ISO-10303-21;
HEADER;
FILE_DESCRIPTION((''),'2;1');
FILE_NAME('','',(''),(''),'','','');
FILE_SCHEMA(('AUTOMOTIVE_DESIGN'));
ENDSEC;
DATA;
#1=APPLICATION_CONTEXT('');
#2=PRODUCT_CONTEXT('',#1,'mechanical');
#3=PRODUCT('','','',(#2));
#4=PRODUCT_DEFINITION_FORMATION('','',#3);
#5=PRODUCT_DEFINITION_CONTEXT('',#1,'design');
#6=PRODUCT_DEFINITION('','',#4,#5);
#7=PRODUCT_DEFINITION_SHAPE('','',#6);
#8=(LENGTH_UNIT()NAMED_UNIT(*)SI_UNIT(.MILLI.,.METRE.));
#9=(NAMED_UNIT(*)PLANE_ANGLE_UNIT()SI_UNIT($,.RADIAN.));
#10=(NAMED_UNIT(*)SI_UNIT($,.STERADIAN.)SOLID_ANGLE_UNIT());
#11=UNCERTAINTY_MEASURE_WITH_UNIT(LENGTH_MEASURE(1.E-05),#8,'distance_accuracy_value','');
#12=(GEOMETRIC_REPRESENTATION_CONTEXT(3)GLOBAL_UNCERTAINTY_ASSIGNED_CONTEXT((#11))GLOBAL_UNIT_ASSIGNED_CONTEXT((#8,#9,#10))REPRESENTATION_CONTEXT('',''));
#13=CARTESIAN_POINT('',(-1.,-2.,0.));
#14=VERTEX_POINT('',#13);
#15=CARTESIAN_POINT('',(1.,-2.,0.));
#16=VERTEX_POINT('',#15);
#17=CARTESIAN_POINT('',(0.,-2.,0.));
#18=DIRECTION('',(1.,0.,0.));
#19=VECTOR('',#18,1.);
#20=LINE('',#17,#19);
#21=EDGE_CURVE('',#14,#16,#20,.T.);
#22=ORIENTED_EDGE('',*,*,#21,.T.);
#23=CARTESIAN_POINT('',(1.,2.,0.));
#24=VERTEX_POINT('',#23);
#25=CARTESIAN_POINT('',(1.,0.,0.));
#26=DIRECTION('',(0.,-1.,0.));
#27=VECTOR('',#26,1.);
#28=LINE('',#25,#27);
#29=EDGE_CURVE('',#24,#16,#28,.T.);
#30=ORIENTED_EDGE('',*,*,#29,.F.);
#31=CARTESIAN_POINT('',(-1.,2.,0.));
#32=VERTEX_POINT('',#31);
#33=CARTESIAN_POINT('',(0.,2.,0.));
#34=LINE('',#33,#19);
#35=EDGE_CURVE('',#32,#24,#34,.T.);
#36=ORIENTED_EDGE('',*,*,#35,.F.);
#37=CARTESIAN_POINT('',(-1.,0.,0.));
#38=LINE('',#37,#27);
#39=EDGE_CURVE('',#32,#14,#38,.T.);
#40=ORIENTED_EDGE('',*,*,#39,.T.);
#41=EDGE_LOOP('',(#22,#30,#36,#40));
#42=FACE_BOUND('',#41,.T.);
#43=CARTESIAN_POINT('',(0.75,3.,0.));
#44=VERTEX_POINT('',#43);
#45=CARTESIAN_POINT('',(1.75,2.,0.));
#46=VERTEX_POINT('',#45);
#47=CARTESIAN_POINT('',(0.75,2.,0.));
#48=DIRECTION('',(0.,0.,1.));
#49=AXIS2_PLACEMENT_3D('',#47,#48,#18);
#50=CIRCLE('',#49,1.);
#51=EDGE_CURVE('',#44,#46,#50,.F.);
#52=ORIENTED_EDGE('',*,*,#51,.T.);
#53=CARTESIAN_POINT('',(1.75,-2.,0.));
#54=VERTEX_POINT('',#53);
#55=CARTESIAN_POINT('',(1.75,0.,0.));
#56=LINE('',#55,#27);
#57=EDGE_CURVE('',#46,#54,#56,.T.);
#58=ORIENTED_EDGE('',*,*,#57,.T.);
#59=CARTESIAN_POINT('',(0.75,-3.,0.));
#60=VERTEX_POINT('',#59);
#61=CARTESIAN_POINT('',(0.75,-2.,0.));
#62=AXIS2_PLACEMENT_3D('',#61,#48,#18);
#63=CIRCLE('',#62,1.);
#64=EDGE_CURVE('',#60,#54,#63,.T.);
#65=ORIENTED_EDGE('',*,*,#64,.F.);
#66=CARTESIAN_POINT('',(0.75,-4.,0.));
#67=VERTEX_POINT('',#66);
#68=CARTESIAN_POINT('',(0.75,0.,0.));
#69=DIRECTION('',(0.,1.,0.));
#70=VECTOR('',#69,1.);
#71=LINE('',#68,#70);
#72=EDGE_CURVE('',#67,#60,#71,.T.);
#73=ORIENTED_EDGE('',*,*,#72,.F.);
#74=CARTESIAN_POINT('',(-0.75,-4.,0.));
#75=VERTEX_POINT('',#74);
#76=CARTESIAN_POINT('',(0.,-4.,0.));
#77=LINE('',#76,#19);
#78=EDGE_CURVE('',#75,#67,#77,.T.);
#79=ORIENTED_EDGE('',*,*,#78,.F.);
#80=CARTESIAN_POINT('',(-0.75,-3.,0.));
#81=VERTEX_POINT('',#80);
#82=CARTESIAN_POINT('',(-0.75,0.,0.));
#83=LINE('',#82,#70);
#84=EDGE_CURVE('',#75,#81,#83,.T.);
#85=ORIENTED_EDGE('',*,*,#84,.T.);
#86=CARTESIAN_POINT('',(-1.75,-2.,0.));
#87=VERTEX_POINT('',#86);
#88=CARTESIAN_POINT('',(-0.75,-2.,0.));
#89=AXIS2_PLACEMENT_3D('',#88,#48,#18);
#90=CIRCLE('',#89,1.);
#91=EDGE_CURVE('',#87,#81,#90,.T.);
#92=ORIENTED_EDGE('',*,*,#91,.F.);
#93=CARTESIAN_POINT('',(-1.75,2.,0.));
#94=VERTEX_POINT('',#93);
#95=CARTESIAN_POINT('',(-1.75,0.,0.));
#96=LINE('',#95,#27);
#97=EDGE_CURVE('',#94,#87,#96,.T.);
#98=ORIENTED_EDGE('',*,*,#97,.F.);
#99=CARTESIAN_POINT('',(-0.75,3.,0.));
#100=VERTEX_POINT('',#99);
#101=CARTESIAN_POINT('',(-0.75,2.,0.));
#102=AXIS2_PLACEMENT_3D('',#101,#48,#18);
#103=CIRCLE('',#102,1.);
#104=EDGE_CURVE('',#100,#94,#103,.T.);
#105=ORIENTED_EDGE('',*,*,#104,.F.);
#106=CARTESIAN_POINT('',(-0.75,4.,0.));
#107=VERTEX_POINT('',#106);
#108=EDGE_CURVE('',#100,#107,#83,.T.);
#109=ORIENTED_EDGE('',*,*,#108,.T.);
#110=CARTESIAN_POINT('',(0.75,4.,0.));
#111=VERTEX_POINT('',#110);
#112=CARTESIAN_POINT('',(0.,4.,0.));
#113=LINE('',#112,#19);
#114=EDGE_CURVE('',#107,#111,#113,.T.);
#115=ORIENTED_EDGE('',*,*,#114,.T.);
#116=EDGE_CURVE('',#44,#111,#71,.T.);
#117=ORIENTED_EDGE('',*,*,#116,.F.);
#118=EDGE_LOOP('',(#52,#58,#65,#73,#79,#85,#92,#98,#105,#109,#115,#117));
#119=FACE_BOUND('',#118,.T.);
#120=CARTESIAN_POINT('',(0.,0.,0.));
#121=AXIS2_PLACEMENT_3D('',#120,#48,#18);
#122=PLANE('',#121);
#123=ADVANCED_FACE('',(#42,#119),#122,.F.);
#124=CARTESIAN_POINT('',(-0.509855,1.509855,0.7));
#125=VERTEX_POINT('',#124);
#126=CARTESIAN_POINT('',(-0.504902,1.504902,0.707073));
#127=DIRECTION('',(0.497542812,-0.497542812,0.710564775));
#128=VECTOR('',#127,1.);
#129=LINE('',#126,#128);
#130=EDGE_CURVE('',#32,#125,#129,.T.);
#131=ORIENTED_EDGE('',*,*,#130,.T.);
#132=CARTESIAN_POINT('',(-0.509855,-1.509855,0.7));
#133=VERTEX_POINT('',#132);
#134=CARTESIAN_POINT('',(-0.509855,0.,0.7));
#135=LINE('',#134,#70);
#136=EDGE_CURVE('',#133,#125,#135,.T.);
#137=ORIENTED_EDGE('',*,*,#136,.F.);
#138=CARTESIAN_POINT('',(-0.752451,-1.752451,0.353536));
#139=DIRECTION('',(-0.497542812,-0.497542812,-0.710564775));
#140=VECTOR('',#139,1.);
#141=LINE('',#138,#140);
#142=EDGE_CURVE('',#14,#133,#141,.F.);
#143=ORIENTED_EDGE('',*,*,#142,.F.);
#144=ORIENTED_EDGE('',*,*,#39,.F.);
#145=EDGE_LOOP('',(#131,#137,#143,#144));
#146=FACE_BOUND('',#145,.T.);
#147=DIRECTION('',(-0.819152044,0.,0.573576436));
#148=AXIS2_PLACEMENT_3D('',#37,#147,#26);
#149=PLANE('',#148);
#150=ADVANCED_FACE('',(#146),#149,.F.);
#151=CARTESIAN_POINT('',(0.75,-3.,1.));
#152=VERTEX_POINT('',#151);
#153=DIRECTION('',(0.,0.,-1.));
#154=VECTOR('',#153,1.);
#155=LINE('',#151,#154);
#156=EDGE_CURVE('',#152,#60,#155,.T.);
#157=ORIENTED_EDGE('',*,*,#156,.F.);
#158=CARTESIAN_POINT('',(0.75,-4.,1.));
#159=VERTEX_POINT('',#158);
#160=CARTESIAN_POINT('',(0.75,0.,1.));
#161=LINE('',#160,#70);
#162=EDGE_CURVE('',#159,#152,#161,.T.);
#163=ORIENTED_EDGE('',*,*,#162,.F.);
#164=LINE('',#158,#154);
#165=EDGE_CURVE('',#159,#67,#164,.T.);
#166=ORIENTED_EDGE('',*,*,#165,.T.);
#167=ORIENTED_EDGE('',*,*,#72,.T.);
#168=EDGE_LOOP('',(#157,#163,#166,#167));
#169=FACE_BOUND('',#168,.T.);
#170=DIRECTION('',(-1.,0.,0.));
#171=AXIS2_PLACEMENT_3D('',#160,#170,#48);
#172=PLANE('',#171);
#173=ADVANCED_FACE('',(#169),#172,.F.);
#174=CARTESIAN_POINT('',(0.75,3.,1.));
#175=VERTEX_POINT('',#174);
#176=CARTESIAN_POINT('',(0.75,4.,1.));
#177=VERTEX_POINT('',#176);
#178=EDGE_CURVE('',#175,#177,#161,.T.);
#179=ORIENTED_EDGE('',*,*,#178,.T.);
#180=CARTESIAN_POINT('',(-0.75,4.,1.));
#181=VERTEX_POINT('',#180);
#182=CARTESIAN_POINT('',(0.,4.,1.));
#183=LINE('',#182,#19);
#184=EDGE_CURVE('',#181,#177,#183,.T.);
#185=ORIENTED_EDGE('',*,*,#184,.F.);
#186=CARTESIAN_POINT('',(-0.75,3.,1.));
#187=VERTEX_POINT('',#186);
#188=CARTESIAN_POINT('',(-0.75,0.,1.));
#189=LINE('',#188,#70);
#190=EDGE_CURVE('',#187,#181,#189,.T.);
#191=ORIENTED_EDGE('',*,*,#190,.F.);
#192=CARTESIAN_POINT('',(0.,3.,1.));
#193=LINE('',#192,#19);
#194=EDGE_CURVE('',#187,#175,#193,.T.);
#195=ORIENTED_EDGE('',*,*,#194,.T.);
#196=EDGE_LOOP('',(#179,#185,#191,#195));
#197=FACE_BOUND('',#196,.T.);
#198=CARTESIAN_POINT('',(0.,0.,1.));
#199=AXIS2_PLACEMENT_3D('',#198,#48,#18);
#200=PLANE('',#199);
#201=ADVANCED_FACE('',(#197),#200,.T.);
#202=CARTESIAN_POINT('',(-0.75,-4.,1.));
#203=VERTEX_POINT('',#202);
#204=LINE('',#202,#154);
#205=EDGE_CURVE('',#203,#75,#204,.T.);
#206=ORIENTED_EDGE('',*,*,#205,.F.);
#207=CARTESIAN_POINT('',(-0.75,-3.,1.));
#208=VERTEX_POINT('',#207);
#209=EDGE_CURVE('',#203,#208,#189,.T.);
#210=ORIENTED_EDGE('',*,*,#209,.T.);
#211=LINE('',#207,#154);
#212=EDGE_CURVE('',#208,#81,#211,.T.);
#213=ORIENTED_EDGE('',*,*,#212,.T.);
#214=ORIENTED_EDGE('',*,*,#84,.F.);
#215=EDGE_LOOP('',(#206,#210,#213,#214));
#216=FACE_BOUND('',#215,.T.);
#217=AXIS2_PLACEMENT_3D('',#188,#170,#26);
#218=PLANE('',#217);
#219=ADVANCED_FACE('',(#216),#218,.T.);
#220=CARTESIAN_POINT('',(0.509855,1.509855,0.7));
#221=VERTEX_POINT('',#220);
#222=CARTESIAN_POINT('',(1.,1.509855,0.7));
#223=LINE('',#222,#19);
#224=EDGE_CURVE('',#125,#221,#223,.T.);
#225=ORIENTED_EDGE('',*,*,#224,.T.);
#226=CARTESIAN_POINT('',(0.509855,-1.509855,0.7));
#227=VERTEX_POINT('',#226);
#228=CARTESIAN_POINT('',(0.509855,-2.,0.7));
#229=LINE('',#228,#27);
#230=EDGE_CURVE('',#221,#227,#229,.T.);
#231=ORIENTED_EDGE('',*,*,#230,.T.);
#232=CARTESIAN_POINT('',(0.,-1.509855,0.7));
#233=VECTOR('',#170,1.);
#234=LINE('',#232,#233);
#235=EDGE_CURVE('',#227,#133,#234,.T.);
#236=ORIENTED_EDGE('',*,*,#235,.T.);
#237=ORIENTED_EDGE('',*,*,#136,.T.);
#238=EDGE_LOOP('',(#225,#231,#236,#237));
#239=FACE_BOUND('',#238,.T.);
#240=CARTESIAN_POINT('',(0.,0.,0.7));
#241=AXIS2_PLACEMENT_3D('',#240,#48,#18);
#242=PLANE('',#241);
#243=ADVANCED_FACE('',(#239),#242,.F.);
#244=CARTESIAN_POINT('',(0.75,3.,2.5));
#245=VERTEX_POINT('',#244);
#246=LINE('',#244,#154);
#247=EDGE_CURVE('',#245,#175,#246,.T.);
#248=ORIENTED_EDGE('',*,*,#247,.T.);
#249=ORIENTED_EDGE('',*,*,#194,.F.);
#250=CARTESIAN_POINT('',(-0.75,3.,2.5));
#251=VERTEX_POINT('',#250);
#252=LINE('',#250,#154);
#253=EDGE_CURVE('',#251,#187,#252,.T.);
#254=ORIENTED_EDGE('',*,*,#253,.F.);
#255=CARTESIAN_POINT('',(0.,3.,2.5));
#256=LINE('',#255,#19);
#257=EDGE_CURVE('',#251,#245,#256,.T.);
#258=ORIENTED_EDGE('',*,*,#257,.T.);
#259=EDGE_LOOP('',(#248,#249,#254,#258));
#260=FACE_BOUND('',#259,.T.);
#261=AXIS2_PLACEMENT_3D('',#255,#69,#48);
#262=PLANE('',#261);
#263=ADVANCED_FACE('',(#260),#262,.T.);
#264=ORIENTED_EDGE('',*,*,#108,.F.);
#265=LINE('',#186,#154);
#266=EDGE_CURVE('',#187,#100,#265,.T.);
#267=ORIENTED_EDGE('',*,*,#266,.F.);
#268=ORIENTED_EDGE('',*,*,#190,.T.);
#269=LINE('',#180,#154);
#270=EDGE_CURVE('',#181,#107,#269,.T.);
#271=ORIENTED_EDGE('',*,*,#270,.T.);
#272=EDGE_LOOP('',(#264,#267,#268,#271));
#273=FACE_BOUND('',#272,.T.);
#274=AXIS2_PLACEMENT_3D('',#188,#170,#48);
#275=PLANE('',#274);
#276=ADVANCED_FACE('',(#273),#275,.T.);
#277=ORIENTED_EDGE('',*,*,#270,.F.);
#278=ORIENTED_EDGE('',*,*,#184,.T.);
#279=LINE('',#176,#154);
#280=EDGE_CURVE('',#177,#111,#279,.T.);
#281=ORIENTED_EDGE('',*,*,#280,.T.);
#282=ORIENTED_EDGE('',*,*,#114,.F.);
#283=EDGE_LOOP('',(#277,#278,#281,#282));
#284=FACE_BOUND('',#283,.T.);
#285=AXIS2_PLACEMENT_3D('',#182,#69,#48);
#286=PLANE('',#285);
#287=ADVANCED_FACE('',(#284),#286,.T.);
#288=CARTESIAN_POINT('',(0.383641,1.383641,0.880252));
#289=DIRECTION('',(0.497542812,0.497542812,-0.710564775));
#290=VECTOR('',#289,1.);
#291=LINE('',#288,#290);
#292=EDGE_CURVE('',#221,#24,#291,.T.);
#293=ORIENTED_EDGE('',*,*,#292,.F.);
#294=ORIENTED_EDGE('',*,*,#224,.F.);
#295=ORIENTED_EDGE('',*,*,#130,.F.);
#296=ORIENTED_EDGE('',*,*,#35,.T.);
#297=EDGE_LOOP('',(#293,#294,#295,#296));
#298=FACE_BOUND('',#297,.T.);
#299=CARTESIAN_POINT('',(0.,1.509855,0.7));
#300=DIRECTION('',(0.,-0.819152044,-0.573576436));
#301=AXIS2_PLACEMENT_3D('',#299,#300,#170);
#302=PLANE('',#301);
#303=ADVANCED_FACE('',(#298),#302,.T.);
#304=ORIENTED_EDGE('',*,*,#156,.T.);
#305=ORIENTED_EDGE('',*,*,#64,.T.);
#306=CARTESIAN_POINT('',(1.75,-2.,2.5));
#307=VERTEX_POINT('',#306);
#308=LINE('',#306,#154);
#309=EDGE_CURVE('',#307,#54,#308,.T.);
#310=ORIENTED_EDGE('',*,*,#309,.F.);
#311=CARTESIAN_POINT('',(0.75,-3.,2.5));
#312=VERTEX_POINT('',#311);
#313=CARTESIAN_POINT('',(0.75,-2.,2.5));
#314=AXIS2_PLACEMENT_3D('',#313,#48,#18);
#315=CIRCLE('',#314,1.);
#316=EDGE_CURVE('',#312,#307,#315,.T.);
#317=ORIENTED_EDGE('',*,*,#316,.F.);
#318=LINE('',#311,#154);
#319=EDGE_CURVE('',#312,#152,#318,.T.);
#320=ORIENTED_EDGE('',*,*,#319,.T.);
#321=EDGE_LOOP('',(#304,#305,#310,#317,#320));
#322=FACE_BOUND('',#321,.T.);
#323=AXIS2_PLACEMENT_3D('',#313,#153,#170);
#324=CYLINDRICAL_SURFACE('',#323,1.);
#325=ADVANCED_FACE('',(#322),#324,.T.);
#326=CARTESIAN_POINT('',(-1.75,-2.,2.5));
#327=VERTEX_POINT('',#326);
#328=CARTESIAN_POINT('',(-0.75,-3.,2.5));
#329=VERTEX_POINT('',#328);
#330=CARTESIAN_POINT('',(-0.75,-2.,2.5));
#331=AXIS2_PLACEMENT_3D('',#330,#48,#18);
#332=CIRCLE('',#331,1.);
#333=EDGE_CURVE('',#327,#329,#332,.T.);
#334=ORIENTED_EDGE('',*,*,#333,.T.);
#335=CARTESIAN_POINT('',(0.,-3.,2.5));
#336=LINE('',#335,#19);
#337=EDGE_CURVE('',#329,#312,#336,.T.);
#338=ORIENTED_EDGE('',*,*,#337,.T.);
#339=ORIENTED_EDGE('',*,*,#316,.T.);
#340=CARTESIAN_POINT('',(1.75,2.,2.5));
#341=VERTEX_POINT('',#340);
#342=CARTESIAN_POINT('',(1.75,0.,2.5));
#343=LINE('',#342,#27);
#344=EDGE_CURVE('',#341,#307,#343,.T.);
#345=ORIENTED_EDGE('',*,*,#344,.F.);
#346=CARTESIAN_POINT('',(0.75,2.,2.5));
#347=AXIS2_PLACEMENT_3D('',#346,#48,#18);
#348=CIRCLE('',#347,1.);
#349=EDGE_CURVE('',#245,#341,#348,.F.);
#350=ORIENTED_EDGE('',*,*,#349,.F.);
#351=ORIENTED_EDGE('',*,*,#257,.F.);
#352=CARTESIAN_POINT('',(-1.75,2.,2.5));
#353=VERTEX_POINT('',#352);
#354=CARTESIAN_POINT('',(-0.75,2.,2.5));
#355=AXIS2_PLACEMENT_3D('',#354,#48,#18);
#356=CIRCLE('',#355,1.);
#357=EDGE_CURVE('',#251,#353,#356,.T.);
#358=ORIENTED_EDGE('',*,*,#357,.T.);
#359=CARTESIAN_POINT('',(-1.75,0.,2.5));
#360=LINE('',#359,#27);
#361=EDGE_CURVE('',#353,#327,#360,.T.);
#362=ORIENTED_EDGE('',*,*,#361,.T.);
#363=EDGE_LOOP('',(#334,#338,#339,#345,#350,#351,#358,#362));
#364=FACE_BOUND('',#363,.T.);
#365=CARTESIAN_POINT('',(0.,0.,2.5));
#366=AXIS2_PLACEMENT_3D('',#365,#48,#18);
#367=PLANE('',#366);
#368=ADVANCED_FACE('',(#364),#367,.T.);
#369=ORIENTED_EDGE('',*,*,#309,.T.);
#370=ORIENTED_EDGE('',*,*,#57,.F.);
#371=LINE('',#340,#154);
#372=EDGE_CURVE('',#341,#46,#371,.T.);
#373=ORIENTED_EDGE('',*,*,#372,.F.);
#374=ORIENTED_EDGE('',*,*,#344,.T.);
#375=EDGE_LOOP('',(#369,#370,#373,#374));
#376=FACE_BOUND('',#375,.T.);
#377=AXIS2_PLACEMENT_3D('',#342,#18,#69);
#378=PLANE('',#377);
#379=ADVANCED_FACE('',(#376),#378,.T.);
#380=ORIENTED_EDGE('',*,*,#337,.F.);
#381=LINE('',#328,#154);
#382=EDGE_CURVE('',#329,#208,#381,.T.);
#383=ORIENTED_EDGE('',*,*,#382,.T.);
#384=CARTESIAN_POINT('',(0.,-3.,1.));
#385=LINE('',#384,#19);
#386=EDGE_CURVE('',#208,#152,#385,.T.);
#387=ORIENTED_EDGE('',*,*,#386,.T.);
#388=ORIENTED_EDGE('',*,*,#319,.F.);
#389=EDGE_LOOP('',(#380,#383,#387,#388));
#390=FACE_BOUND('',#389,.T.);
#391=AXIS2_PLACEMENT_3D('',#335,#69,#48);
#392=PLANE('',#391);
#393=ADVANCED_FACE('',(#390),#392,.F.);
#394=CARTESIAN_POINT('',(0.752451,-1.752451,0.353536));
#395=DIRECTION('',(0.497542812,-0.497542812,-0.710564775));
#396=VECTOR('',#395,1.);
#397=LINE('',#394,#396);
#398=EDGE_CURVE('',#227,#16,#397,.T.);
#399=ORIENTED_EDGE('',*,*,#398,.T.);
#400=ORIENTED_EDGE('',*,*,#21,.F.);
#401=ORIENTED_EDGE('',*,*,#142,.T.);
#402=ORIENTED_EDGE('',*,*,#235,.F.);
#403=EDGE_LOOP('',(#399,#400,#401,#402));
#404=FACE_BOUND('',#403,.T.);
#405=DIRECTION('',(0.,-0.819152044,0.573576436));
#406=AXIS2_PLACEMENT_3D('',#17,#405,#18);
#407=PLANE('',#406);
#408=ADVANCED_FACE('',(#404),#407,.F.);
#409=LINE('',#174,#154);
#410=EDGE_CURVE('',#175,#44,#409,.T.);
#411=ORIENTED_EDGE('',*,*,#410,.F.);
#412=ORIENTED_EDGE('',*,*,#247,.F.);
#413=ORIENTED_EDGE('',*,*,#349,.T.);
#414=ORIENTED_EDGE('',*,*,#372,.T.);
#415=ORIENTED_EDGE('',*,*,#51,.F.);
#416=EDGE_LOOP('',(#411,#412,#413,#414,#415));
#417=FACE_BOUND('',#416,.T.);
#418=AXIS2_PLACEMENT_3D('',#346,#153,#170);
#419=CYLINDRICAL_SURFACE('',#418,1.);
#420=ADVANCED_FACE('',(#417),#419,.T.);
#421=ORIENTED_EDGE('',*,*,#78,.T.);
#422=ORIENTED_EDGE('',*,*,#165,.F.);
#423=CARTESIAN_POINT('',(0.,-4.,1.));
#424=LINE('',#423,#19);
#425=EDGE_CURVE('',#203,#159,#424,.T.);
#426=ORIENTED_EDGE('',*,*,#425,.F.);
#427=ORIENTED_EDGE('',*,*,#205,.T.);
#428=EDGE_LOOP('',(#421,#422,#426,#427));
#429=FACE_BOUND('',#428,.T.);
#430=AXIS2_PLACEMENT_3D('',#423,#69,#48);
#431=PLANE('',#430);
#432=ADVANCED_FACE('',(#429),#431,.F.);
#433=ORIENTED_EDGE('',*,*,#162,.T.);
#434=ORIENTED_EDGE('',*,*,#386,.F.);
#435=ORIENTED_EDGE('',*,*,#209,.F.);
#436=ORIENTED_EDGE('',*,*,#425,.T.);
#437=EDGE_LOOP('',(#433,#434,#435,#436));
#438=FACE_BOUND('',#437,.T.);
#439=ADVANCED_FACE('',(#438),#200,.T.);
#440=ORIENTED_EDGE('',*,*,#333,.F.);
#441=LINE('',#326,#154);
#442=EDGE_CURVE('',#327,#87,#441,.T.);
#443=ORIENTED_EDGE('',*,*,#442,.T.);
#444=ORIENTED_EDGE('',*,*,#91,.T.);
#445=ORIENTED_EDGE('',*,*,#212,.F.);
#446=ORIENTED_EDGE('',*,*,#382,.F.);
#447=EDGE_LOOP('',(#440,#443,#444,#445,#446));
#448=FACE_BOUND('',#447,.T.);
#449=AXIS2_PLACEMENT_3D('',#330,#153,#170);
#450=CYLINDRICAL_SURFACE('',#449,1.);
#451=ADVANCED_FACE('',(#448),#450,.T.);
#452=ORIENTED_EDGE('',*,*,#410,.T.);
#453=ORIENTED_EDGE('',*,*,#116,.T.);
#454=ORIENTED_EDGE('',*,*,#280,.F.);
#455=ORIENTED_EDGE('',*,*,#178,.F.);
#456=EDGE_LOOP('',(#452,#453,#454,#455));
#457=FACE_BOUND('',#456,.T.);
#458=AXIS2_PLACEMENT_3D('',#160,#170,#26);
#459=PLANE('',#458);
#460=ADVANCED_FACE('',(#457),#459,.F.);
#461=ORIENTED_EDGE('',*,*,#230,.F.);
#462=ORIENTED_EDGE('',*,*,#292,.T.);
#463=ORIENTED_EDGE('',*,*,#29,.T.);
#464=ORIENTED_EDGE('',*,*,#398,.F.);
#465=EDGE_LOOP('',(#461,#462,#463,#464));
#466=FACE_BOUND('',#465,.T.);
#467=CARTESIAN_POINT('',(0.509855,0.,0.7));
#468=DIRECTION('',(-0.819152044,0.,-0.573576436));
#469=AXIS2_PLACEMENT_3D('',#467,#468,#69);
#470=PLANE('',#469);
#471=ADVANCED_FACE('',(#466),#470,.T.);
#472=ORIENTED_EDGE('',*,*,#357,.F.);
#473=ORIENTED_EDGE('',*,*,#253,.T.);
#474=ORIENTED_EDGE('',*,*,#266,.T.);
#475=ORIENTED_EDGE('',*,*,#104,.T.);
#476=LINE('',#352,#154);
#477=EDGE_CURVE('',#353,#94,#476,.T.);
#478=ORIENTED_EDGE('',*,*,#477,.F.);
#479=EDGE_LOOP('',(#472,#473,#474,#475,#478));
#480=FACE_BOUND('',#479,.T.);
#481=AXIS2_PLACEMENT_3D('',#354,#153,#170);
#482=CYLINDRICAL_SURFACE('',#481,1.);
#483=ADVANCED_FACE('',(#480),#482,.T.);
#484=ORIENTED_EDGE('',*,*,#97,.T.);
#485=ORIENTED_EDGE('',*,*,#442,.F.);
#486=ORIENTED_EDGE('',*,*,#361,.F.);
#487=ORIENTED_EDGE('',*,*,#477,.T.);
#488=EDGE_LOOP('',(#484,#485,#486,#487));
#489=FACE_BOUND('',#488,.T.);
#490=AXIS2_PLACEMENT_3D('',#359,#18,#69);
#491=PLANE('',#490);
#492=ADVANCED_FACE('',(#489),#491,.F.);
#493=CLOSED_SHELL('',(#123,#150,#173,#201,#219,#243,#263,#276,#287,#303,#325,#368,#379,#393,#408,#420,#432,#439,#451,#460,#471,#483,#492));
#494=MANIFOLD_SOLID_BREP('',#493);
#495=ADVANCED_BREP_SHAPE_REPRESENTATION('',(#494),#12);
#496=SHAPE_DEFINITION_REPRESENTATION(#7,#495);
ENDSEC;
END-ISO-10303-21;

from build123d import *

# Parameters (mm, degrees)
SKETCH_1_W          = 2
SKETCH_1_H          = 4
EXTRUDE_1_DEPTH     = 2.5
SKETCH_1_3_W        = 1.5
SKETCH_1_3_H        = 1
EXTRUDE_2_DEPTH     = 1
SKETCH_1_4_W        = 2
SKETCH_1_4_H        = 4
CUT_EXTRUDE_1_DEPTH = 0.7
CHAMFER_1_SIZE      = 0.7
CHAMFER_1_SIZE_2    = 0.490145277


with BuildPart() as part:
    # 草图1 → 凸台-拉伸1 (new body)
    # profile 1 of 2: a face of its own
    with BuildSketch(Plane.XY):
        with BuildLine():
            ThreePointArc((0.75, 3), (1.457106781, 2.707106781), (1.75, 2))
            Line((1.75, 2), (1.75, -2))
            ThreePointArc((1.75, -2), (1.457106781, -2.707106781), (0.75, -3))
            Line((0.75, -3), (-0.75, -3))
            ThreePointArc((-0.75, -3), (-1.457106781, -2.707106781), (-1.75, -2))
            Line((-1.75, -2), (-1.75, 2))
            ThreePointArc((-1.75, 2), (-1.457106781, 2.707106781), (-0.75, 3))
            Line((-0.75, 3), (0.75, 3))
        make_face()
        Rectangle(SKETCH_1_W, SKETCH_1_H, mode=Mode.SUBTRACT)
    # profile 2 of 2: a face of its own
    with BuildSketch(Plane.XY):
        Rectangle(SKETCH_1_W, SKETCH_1_H)
    extrude(amount=EXTRUDE_1_DEPTH)

    # 草图1<3> → 凸台-拉伸2 (add)
    with BuildSketch(Plane.XY):
        with Locations((0, 3.5)):
            Rectangle(SKETCH_1_3_W, SKETCH_1_3_H)
        with Locations((0, -3.5)):
            Rectangle(SKETCH_1_3_W, SKETCH_1_3_H)
    extrude(amount=EXTRUDE_2_DEPTH)

    # 草图1<4> → 切除-拉伸1 (cut)
    with BuildSketch(Plane.XY):
        Rectangle(SKETCH_1_4_W, SKETCH_1_4_H)
    extrude(amount=CUT_EXTRUDE_1_DEPTH, mode=Mode.SUBTRACT)

    # 倒角1
    # the kernel refuses this chamfer: 0.7, 0.490145277 mm, written as the material it adds along each edge
    with BuildSketch(Plane(origin=(1, -2, 0.7), x_dir=(0, -0.02220967419845705, -0.99975333476413), z_dir=(-1, 0, 0)), Plane(origin=(-1, 2, 0.7), x_dir=(0, 0.02220967419845705, -0.99975333476413), z_dir=(1, 0, 0))) as chamfer_1_piece_1:
        Polygon((CHAMFER_1_SIZE * 0.999753334764, -CHAMFER_1_SIZE * 0.0222096741985), (-CHAMFER_1_SIZE_2 * 0.022209674187, -CHAMFER_1_SIZE_2 * 0.999753334248), (0, 0), align=None)
    extrude(amount=2)
    with BuildSketch(Plane(origin=(-1, -2, 0.7), x_dir=(-0.02220967419845705, 0, -0.99975333476413), z_dir=(0, 1, 0)), Plane(origin=(1, 2, 0.7), x_dir=(0.02220967419845705, 0, -0.99975333476413), z_dir=(0, -1, 0))) as chamfer_1_piece_2:
        Polygon((CHAMFER_1_SIZE * 0.999753334764, -CHAMFER_1_SIZE * 0.0222096741985), (-CHAMFER_1_SIZE_2 * 0.022209674187, -CHAMFER_1_SIZE_2 * 0.999753334248), (0, 0), align=None)
    extrude(amount=4)


solid = part.part
